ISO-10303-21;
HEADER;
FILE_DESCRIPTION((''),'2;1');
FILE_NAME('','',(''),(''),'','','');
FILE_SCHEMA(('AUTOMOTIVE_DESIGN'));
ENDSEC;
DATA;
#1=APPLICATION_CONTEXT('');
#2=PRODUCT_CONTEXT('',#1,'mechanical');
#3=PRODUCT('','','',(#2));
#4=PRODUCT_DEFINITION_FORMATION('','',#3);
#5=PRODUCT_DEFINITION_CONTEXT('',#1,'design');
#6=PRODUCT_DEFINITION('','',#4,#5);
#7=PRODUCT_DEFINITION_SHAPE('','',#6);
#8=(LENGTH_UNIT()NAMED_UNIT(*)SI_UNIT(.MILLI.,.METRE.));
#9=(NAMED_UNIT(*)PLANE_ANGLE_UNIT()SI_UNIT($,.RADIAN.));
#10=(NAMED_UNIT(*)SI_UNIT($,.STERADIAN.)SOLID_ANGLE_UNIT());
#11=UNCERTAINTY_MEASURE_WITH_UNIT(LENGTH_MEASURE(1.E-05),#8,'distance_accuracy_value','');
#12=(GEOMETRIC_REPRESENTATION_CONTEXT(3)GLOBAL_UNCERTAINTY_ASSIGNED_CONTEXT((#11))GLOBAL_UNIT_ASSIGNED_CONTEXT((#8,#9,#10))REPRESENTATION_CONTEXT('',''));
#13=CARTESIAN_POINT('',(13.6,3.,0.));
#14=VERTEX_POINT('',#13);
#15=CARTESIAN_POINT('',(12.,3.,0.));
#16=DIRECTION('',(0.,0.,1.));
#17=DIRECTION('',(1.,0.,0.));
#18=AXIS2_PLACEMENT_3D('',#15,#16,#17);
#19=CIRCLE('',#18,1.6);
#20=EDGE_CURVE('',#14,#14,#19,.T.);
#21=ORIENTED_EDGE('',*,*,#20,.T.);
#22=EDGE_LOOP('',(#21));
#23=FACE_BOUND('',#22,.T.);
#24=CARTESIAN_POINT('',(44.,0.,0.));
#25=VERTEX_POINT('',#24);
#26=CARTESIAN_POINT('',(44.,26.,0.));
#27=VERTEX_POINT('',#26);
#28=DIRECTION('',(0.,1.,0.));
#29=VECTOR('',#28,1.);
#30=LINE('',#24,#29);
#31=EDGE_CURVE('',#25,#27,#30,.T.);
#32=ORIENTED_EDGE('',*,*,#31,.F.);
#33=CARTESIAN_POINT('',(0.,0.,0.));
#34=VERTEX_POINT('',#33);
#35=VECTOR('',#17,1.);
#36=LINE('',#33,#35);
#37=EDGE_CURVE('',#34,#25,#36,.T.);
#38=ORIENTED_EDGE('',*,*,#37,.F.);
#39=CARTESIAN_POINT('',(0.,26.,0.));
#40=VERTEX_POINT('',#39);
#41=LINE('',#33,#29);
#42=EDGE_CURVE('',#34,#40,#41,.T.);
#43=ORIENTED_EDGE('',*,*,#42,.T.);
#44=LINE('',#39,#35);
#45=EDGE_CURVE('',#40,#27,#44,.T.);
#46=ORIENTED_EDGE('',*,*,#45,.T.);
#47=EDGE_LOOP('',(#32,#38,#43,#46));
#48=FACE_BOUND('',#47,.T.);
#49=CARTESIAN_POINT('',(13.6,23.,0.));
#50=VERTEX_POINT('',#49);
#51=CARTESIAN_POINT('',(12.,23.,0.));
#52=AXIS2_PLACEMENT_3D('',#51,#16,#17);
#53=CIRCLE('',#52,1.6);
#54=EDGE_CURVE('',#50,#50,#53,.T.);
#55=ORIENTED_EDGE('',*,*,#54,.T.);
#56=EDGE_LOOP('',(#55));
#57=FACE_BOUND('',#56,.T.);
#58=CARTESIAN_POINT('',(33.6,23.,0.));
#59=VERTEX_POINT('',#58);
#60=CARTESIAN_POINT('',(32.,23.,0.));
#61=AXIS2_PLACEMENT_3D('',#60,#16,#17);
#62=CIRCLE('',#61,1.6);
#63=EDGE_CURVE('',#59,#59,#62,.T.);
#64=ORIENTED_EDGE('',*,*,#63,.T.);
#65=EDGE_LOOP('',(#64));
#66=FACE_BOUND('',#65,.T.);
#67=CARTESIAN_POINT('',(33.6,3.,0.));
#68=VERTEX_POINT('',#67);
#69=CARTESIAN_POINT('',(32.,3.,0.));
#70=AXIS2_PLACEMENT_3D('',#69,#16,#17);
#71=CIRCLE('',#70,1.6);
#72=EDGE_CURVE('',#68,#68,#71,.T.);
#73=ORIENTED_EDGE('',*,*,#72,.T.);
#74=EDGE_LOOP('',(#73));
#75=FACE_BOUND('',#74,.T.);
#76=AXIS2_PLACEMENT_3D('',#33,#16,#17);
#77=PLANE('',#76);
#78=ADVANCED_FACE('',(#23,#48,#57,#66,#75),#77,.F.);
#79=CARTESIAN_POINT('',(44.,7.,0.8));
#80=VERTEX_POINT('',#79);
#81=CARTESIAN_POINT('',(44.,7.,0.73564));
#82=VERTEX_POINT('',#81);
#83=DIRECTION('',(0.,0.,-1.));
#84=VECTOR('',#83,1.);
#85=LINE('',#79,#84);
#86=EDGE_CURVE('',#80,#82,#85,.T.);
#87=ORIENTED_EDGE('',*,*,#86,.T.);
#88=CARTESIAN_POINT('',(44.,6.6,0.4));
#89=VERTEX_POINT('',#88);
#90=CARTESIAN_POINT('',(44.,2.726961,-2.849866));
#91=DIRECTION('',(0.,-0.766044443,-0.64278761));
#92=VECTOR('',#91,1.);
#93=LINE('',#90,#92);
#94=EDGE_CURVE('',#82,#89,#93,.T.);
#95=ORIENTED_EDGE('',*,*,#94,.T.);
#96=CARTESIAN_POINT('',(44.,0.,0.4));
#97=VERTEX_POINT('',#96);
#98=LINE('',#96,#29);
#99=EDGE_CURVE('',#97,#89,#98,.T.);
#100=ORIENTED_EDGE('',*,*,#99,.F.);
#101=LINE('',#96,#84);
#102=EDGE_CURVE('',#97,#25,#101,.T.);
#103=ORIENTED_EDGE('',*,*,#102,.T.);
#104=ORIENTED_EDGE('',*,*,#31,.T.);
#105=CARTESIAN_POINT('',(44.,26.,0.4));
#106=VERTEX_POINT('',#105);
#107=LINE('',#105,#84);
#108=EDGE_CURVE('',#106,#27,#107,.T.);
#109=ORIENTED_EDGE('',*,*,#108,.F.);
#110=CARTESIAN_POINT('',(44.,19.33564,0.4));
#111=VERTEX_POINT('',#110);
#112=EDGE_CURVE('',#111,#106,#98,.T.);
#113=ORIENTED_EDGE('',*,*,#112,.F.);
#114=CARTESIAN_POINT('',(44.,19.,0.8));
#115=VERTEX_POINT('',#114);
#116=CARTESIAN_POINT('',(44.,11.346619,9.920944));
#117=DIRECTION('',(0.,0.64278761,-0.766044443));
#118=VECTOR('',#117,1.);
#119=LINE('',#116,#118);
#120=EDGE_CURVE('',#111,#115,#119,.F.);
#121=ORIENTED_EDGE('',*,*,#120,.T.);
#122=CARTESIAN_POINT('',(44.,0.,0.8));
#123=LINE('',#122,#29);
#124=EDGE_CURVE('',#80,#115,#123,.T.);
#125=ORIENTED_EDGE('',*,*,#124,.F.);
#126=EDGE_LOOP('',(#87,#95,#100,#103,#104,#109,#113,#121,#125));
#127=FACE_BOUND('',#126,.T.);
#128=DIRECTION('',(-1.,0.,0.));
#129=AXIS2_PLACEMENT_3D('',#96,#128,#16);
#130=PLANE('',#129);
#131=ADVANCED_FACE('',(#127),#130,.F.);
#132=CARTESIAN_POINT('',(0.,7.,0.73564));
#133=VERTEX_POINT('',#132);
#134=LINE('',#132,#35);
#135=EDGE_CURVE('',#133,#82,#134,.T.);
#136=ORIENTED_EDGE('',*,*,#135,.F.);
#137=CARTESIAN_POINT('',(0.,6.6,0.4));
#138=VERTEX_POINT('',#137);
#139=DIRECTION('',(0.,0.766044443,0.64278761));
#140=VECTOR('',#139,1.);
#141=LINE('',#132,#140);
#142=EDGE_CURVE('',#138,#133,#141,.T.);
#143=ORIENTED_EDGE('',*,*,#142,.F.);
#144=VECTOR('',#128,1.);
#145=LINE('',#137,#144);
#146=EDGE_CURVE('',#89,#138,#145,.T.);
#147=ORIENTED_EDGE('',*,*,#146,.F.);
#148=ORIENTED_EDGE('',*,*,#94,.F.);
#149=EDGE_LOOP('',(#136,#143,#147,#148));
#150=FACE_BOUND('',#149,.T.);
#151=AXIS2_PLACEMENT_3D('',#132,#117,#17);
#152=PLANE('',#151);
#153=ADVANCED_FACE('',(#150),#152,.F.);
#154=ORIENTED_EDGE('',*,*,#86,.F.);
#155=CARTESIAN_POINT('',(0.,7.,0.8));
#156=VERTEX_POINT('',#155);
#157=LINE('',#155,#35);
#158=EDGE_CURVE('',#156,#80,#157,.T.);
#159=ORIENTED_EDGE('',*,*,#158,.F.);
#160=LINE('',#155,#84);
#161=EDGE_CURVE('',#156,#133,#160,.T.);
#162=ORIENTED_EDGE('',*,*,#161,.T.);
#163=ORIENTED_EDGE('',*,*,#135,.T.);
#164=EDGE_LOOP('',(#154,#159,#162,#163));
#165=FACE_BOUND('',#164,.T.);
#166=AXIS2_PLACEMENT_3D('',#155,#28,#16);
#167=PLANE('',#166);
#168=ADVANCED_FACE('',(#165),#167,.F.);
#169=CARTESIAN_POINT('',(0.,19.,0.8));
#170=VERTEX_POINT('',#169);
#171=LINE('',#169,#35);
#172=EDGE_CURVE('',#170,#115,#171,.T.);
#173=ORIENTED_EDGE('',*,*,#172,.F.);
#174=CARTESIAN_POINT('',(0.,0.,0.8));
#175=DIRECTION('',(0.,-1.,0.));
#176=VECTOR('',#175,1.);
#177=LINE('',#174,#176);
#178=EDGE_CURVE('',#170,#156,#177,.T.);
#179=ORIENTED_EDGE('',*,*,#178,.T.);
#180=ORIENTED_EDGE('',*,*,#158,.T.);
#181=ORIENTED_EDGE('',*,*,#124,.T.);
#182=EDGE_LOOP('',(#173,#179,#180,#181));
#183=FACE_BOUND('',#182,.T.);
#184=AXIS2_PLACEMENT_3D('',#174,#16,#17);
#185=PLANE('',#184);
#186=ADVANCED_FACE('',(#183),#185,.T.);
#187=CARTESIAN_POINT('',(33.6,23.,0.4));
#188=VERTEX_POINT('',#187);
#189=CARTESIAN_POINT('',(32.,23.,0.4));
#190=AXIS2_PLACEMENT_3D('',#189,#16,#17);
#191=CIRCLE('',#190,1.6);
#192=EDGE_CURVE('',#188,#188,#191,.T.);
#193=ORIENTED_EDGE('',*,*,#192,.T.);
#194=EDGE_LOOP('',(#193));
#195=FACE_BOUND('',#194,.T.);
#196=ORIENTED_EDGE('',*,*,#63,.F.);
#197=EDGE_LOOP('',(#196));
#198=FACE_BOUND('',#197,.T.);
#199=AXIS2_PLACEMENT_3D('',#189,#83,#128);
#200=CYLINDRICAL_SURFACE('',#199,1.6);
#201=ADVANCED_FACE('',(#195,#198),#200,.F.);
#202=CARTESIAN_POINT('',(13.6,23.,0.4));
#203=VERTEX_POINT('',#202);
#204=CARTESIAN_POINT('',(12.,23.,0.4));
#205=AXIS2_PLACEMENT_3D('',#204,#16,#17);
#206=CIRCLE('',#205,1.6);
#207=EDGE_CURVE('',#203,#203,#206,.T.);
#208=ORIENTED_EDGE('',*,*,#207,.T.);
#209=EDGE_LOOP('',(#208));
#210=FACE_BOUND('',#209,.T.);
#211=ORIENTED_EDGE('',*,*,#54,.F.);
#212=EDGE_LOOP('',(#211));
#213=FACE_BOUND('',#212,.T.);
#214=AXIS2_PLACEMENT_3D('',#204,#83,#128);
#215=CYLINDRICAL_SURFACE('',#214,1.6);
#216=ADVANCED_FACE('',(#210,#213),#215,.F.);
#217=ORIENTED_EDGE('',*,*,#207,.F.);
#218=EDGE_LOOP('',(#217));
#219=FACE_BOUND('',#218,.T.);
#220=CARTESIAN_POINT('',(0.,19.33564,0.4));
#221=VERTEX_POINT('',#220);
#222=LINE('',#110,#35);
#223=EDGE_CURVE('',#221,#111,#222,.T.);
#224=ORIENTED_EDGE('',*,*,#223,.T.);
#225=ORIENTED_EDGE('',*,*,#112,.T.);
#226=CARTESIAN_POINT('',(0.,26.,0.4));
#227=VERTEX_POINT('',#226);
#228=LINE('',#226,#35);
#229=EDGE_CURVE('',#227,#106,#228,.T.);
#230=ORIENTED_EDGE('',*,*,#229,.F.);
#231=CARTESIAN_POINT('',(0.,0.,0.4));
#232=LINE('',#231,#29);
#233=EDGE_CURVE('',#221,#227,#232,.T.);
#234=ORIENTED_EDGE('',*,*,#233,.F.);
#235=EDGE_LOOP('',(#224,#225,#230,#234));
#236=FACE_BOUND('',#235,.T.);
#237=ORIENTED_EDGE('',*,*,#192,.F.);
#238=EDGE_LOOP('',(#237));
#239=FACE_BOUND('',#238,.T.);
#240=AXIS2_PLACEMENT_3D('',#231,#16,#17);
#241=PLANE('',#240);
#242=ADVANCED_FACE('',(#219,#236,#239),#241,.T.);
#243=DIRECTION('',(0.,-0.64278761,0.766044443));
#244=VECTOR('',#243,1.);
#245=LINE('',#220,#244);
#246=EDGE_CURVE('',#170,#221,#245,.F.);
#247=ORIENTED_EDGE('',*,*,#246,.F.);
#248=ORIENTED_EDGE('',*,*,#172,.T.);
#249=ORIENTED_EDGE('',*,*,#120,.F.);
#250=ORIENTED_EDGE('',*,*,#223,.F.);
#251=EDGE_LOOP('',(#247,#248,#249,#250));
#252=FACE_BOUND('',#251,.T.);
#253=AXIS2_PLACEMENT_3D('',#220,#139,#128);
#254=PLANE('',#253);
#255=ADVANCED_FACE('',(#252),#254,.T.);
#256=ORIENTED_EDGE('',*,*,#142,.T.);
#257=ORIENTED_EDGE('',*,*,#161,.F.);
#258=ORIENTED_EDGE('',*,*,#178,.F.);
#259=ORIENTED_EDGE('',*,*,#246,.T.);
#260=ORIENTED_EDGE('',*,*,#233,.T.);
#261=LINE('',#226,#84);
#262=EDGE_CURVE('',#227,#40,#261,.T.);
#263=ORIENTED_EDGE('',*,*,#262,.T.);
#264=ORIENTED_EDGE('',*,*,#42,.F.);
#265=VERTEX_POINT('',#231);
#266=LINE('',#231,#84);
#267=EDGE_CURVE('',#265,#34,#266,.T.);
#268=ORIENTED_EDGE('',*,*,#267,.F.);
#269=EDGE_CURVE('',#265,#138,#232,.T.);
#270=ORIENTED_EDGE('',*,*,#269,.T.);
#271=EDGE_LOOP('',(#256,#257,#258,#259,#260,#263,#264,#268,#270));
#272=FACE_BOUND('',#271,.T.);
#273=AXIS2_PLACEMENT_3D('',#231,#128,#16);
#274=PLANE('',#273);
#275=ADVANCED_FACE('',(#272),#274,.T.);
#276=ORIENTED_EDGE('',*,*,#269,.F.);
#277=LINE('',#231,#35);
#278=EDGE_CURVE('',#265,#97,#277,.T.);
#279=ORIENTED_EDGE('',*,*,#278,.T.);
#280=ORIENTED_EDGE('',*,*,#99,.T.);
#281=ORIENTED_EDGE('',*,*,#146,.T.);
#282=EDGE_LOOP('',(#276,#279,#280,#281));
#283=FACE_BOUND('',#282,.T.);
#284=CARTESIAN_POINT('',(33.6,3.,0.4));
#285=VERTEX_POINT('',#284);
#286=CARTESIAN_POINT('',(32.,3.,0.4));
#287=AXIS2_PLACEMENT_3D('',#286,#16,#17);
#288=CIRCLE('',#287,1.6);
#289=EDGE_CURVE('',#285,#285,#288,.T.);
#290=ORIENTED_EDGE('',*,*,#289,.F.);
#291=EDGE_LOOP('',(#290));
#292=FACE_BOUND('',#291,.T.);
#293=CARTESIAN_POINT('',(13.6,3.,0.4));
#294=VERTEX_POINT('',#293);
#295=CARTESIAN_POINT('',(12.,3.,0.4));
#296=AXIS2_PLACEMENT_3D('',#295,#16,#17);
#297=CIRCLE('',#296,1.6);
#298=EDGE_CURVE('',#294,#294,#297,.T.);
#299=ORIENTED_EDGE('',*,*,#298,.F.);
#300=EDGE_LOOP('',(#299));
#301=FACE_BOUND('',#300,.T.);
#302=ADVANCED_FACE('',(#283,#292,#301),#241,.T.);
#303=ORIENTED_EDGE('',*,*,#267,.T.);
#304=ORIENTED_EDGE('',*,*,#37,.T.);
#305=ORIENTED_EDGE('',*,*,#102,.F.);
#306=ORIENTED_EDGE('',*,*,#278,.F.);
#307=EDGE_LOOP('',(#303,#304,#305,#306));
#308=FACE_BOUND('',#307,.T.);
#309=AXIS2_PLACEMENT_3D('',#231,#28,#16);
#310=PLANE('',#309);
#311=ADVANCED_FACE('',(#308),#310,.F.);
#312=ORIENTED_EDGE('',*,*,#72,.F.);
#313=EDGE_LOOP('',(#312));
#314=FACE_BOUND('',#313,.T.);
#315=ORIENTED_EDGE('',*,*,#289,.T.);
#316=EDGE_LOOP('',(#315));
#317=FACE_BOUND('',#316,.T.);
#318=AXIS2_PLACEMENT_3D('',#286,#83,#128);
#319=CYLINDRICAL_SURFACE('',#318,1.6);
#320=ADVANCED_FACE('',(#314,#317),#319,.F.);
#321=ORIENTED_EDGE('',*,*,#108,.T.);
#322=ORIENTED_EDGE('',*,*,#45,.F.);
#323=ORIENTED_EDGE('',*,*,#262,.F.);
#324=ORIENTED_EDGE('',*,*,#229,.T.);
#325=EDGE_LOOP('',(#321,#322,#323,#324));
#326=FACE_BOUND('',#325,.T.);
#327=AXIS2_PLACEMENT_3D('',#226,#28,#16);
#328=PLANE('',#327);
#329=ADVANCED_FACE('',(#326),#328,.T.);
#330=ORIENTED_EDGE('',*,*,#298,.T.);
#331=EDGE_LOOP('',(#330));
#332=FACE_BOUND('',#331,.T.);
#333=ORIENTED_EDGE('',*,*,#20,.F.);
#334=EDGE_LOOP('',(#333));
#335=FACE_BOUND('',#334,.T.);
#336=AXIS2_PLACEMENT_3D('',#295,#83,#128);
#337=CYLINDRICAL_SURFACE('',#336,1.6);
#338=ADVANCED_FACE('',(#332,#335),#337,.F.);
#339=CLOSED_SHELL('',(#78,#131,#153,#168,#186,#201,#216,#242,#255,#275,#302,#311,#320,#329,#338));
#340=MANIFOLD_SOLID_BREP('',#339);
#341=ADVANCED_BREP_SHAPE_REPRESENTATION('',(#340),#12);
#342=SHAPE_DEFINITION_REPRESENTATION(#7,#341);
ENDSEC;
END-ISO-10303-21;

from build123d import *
from OCP.BRepFilletAPI import BRepFilletAPI_MakeChamfer

# Parameters (mm, degrees)
SKETCH1_W           = 44
SKETCH1_H           = 26
SKETCH1_R           = 1.6
BOSS_EXTRUDE1_DEPTH = 0.4
SKETCH2_W           = 44
SKETCH2_H           = 12
BOSS_EXTRUDE2_DEPTH = 0.4
CHAMFER1_SIZE       = 0.4
CHAMFER1_SIZE_2     = 0.335639852


with BuildPart() as part:
    # Sketch1 → Boss-Extrude1 (new body)
    with BuildSketch(Plane.XY):
        with Locations((22, 13)):
            Rectangle(SKETCH1_W, SKETCH1_H)
        with Locations((32, 3)):
            Circle(SKETCH1_R, mode=Mode.SUBTRACT)
        with Locations((12, 3)):
            Circle(SKETCH1_R, mode=Mode.SUBTRACT)
        with Locations((32, 23)):
            Circle(SKETCH1_R, mode=Mode.SUBTRACT)
        with Locations((12, 23)):
            Circle(SKETCH1_R, mode=Mode.SUBTRACT)
    extrude(amount=BOSS_EXTRUDE1_DEPTH)

    # Sketch2 → Boss-Extrude2 (add)
    with BuildSketch(Plane.XY.offset(0.4)):
        with Locations((22, 13)):
            Rectangle(SKETCH2_W, SKETCH2_H)
    extrude(amount=BOSS_EXTRUDE2_DEPTH)

    # Chamfer1
    chamfer1_edges_1 = [part.edges().sort_by_distance(p)[0] for p in [
        (22, 7, 0.4),
    ]]
    chamfer1_side_1 = [part.faces().sort_by_distance(p)[0] for p in [
        (22, 6.993287203, 0.4),
    ]]
    chamfer1_edges_2 = [part.edges().sort_by_distance(p)[0] for p in [
        (22, 19, 0.4),
    ]]
    chamfer1_side_2 = [part.faces().sort_by_distance(p)[0] for p in [
        (22, 19.006712797, 0.4),
    ]]
    chamfer1 = BRepFilletAPI_MakeChamfer(part.part.solid().wrapped)
    for e in chamfer1_edges_1:
        chamfer1.Add(CHAMFER1_SIZE - 0.0001, CHAMFER1_SIZE_2 - 0.0001, e.wrapped, chamfer1_side_1[0].wrapped)
    for e in chamfer1_edges_2:
        chamfer1.Add(CHAMFER1_SIZE_2 - 0.0001, CHAMFER1_SIZE - 0.0001, e.wrapped, chamfer1_side_2[0].wrapped)
    add(Compound.cast(chamfer1.Shape()), mode=Mode.REPLACE)  # a hair under: the kernel refuses the full size


solid = part.part
